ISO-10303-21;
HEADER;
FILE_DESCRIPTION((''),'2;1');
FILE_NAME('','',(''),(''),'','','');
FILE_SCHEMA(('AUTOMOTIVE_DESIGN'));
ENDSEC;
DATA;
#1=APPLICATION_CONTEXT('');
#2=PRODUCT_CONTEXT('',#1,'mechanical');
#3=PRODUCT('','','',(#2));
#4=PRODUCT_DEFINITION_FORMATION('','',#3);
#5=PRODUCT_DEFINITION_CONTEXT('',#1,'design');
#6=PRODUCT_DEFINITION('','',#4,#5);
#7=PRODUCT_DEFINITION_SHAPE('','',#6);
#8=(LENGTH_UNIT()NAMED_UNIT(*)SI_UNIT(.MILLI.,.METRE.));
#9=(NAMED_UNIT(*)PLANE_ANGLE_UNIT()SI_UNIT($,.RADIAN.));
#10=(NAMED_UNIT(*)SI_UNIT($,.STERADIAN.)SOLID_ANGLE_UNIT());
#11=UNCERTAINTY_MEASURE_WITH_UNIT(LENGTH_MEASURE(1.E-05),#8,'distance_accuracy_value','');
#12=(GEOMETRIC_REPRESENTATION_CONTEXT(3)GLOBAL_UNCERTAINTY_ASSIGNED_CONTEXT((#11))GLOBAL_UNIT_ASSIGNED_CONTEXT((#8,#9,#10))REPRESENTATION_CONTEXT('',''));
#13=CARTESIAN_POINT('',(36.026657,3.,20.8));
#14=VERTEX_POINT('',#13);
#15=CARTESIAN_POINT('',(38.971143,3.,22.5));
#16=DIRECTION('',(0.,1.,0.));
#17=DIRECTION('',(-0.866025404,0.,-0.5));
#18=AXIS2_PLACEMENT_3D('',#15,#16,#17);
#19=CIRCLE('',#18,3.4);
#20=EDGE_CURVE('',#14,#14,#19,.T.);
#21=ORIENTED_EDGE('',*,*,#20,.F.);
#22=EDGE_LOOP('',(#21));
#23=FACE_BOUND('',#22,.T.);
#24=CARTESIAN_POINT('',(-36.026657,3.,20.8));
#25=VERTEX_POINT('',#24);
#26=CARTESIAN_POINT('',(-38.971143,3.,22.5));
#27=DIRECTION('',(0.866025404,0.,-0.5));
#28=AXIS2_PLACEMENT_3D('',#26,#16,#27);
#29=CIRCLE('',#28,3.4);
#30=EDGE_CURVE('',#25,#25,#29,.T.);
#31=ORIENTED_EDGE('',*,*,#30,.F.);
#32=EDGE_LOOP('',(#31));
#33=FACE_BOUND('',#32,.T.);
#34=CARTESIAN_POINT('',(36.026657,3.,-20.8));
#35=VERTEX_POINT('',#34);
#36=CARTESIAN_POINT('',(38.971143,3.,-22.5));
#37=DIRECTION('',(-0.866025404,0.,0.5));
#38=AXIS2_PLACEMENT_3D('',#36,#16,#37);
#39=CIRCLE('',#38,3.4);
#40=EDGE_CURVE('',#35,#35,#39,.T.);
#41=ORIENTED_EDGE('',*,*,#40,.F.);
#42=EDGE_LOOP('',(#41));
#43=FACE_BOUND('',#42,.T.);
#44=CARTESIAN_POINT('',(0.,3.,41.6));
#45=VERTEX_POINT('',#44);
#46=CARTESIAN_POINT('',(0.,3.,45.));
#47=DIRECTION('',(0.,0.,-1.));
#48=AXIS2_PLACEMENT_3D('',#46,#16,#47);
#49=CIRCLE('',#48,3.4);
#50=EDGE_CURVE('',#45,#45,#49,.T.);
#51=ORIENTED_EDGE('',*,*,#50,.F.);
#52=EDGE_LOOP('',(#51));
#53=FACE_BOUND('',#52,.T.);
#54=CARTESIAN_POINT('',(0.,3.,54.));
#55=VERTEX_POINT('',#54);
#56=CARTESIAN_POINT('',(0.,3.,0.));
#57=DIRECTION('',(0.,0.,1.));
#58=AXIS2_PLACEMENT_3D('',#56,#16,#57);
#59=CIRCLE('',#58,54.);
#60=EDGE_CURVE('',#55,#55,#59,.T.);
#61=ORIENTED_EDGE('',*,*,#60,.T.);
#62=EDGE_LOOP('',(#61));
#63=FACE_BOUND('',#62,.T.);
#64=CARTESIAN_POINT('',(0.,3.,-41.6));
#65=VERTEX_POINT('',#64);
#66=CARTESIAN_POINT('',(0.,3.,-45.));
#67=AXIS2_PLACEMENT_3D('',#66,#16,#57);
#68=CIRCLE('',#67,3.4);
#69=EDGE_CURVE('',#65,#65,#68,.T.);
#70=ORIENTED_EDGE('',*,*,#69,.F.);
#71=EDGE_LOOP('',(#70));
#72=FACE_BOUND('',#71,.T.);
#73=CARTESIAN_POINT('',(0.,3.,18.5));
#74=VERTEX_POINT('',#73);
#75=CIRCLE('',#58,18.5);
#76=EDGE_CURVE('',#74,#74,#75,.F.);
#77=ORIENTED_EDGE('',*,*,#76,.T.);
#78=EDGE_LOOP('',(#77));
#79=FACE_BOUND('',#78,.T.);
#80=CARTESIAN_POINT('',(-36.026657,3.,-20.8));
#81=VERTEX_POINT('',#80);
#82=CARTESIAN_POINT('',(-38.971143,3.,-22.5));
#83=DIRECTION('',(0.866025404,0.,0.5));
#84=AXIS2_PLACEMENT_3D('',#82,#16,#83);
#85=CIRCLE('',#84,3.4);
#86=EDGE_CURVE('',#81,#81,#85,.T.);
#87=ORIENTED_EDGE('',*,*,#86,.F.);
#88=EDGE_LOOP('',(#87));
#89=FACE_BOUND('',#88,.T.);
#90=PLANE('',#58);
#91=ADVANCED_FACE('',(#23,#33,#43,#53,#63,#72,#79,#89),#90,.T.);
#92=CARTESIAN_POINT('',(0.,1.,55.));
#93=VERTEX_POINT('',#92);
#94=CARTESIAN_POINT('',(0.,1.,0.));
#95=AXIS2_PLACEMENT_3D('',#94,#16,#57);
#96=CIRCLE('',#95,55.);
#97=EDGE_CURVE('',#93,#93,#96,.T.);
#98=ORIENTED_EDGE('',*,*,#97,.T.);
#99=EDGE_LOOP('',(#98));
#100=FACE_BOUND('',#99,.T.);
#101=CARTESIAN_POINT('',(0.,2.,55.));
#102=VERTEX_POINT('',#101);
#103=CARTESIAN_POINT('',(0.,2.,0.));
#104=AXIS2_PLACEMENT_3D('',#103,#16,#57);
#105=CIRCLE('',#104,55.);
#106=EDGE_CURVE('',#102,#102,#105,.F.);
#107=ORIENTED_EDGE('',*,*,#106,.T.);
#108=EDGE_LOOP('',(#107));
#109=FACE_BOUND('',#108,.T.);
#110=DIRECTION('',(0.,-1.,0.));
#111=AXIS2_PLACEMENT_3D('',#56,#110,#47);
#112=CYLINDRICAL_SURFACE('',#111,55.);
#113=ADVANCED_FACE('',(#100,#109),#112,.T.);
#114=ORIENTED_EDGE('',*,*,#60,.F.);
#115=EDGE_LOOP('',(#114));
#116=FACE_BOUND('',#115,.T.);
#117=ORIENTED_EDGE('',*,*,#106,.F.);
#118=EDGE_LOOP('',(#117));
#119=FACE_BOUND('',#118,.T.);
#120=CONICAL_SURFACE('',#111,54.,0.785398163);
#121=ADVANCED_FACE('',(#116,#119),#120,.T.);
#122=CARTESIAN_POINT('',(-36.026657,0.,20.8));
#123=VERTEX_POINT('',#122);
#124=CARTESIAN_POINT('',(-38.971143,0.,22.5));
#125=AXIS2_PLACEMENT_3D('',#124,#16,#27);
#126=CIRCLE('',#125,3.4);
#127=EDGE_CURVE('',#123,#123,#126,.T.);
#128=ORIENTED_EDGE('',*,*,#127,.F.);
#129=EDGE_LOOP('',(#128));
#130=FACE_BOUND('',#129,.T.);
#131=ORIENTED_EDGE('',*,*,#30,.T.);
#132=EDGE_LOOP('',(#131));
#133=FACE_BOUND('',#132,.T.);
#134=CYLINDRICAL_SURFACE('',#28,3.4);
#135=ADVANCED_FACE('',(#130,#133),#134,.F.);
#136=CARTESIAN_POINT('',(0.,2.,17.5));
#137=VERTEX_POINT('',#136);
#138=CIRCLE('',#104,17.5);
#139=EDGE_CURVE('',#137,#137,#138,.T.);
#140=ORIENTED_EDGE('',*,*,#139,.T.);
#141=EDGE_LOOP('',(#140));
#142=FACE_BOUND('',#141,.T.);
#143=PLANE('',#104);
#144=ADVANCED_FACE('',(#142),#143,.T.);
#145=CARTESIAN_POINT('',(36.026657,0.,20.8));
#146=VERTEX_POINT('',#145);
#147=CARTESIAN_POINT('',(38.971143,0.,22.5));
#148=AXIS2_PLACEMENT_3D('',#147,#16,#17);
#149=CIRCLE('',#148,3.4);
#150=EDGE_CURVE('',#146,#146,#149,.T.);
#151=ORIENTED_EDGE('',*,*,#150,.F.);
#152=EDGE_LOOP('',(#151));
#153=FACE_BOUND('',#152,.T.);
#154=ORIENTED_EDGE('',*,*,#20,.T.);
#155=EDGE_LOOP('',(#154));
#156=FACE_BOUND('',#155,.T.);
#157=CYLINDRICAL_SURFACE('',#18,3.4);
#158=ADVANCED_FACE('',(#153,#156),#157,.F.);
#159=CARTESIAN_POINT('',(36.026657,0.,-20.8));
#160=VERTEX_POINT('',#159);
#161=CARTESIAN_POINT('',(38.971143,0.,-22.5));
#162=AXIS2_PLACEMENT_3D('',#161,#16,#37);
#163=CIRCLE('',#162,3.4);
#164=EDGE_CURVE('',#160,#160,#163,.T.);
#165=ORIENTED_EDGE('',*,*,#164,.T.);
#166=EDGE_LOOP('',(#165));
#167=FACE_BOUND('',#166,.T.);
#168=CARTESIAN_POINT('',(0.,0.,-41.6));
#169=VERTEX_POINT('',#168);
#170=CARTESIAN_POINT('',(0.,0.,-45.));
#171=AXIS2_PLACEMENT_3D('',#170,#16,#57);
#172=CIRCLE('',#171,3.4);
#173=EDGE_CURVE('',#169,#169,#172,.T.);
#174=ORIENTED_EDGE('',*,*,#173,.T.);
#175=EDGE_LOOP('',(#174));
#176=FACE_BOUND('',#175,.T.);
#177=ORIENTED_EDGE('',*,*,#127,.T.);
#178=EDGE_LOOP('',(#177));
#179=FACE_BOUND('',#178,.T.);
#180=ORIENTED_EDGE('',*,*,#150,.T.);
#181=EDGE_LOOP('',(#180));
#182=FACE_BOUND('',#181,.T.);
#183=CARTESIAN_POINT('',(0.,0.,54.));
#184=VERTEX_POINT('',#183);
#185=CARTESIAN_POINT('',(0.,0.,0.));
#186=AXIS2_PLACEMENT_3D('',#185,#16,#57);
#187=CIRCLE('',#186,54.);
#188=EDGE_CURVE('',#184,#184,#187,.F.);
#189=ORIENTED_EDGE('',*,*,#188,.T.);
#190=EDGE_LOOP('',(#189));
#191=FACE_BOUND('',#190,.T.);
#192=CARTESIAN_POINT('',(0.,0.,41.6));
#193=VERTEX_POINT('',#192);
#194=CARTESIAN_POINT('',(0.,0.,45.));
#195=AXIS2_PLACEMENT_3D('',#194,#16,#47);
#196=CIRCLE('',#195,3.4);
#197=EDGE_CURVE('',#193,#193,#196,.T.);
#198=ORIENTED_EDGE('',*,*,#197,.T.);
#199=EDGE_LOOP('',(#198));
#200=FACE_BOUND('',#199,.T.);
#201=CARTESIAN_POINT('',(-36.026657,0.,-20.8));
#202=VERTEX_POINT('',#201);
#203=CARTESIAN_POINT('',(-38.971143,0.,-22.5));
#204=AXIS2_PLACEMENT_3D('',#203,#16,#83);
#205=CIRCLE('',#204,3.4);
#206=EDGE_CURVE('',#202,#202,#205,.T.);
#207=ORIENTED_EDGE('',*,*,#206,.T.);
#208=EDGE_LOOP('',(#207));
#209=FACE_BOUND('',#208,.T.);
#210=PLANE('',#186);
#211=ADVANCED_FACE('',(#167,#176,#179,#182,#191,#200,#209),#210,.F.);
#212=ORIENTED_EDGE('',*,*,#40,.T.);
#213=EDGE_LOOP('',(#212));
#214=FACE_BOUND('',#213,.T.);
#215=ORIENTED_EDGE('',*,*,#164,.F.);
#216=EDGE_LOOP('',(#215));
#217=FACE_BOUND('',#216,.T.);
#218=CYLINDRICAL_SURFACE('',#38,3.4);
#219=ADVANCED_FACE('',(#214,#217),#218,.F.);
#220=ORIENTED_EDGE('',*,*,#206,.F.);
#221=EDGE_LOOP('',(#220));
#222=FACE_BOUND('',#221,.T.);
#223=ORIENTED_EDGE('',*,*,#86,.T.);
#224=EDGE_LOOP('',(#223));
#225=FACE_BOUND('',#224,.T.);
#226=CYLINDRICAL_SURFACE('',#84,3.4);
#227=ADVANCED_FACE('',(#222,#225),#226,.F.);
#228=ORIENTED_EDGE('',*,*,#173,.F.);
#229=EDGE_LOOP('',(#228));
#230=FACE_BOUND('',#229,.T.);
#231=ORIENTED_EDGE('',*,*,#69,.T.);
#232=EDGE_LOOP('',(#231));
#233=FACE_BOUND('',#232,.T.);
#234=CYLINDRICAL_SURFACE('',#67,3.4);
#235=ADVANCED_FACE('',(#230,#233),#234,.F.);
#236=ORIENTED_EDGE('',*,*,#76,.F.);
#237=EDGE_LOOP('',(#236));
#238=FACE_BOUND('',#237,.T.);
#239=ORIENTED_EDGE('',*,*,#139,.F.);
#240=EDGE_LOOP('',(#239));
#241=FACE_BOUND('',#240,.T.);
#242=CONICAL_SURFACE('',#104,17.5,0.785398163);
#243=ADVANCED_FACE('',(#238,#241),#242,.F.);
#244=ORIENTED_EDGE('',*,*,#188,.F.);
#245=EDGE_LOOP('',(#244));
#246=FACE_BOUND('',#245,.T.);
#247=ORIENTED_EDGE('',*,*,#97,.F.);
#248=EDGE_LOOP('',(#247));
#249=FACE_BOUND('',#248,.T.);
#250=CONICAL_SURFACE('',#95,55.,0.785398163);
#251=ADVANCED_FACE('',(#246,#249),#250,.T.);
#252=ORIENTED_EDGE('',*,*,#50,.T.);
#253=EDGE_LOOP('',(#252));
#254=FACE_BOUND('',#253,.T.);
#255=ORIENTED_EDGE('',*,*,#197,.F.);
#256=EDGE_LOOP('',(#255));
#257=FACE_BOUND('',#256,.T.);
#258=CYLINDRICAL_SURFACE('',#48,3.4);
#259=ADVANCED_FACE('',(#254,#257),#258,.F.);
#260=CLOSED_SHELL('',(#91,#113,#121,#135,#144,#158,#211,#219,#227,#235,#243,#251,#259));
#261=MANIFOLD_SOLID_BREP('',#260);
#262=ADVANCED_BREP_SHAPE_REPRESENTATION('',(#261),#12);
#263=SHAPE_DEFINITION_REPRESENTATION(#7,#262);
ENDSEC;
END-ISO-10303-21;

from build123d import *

# Parameters (mm, degrees)
SKETCH_1_R               = 55
EXTRUDE_1_DEPTH          = 3
PATTERN_CIRCULAR_1_COUNT = 6
SKETCH_5_R               = 17.5
CUT_EXTRUDE_1_DEPTH      = 1
CHAMFER_1_SIZE           = 1


with BuildPart() as part:
    # 草图1 → 凸台-拉伸1 (new body)
    with BuildSketch(Plane(origin=(0, 0, 0), x_dir=(1, 0, 0), z_dir=(0, 1, 0))):
        with Locations(Location((0, 0, 0), (0, 0, 270))):
            Circle(SKETCH_1_R)
    extrude(amount=EXTRUDE_1_DEPTH)

    # 草图4 → M8 螺纹孔的螺纹孔钻头1 (revolve, cut)
    with BuildSketch(Plane(origin=(0, 3, -45), x_dir=(0, 0, 1), z_dir=(1, 0, 0))):
        Polygon((0, 0), (0, 18.042926105), (3.4, 16), (3.4, 0), align=None)
    hole_wizard_m8_1 = revolve(axis=Axis((0, 9.35, -45), (0, -1, 0)), mode=Mode.SUBTRACT)

    # 阵列(圆周)1: M8 螺纹孔的螺纹孔钻头1 ×6 about axis
    pattern_circular_1_axis = Axis((0, 0, 0), (0, 1, 0))
    for i in range(1, PATTERN_CIRCULAR_1_COUNT):
        add(hole_wizard_m8_1.rotate(pattern_circular_1_axis, i * 360 / PATTERN_CIRCULAR_1_COUNT), mode=Mode.SUBTRACT)

    # 草图5 → 切除-拉伸1 (cut)
    with BuildSketch(Plane(origin=(0, 3, 0), x_dir=(1, 0, 0), z_dir=(0, 1, 0))):
        with Locations(Location((0, 0, 0), (0, 0, 270))):
            Circle(SKETCH_5_R)
    extrude(amount=-CUT_EXTRUDE_1_DEPTH, mode=Mode.SUBTRACT)

    # 倒角1
    chamfer_1_edges = [part.edges().sort_by_distance(p)[0] for p in [
        (0, 0, -55),
        (0, 3, -17.5),
        (0, 3, -55),
    ]]
    chamfer(chamfer_1_edges, length=CHAMFER_1_SIZE - 0.0001)  # a hair under: the kernel refuses the full size


solid = part.part
